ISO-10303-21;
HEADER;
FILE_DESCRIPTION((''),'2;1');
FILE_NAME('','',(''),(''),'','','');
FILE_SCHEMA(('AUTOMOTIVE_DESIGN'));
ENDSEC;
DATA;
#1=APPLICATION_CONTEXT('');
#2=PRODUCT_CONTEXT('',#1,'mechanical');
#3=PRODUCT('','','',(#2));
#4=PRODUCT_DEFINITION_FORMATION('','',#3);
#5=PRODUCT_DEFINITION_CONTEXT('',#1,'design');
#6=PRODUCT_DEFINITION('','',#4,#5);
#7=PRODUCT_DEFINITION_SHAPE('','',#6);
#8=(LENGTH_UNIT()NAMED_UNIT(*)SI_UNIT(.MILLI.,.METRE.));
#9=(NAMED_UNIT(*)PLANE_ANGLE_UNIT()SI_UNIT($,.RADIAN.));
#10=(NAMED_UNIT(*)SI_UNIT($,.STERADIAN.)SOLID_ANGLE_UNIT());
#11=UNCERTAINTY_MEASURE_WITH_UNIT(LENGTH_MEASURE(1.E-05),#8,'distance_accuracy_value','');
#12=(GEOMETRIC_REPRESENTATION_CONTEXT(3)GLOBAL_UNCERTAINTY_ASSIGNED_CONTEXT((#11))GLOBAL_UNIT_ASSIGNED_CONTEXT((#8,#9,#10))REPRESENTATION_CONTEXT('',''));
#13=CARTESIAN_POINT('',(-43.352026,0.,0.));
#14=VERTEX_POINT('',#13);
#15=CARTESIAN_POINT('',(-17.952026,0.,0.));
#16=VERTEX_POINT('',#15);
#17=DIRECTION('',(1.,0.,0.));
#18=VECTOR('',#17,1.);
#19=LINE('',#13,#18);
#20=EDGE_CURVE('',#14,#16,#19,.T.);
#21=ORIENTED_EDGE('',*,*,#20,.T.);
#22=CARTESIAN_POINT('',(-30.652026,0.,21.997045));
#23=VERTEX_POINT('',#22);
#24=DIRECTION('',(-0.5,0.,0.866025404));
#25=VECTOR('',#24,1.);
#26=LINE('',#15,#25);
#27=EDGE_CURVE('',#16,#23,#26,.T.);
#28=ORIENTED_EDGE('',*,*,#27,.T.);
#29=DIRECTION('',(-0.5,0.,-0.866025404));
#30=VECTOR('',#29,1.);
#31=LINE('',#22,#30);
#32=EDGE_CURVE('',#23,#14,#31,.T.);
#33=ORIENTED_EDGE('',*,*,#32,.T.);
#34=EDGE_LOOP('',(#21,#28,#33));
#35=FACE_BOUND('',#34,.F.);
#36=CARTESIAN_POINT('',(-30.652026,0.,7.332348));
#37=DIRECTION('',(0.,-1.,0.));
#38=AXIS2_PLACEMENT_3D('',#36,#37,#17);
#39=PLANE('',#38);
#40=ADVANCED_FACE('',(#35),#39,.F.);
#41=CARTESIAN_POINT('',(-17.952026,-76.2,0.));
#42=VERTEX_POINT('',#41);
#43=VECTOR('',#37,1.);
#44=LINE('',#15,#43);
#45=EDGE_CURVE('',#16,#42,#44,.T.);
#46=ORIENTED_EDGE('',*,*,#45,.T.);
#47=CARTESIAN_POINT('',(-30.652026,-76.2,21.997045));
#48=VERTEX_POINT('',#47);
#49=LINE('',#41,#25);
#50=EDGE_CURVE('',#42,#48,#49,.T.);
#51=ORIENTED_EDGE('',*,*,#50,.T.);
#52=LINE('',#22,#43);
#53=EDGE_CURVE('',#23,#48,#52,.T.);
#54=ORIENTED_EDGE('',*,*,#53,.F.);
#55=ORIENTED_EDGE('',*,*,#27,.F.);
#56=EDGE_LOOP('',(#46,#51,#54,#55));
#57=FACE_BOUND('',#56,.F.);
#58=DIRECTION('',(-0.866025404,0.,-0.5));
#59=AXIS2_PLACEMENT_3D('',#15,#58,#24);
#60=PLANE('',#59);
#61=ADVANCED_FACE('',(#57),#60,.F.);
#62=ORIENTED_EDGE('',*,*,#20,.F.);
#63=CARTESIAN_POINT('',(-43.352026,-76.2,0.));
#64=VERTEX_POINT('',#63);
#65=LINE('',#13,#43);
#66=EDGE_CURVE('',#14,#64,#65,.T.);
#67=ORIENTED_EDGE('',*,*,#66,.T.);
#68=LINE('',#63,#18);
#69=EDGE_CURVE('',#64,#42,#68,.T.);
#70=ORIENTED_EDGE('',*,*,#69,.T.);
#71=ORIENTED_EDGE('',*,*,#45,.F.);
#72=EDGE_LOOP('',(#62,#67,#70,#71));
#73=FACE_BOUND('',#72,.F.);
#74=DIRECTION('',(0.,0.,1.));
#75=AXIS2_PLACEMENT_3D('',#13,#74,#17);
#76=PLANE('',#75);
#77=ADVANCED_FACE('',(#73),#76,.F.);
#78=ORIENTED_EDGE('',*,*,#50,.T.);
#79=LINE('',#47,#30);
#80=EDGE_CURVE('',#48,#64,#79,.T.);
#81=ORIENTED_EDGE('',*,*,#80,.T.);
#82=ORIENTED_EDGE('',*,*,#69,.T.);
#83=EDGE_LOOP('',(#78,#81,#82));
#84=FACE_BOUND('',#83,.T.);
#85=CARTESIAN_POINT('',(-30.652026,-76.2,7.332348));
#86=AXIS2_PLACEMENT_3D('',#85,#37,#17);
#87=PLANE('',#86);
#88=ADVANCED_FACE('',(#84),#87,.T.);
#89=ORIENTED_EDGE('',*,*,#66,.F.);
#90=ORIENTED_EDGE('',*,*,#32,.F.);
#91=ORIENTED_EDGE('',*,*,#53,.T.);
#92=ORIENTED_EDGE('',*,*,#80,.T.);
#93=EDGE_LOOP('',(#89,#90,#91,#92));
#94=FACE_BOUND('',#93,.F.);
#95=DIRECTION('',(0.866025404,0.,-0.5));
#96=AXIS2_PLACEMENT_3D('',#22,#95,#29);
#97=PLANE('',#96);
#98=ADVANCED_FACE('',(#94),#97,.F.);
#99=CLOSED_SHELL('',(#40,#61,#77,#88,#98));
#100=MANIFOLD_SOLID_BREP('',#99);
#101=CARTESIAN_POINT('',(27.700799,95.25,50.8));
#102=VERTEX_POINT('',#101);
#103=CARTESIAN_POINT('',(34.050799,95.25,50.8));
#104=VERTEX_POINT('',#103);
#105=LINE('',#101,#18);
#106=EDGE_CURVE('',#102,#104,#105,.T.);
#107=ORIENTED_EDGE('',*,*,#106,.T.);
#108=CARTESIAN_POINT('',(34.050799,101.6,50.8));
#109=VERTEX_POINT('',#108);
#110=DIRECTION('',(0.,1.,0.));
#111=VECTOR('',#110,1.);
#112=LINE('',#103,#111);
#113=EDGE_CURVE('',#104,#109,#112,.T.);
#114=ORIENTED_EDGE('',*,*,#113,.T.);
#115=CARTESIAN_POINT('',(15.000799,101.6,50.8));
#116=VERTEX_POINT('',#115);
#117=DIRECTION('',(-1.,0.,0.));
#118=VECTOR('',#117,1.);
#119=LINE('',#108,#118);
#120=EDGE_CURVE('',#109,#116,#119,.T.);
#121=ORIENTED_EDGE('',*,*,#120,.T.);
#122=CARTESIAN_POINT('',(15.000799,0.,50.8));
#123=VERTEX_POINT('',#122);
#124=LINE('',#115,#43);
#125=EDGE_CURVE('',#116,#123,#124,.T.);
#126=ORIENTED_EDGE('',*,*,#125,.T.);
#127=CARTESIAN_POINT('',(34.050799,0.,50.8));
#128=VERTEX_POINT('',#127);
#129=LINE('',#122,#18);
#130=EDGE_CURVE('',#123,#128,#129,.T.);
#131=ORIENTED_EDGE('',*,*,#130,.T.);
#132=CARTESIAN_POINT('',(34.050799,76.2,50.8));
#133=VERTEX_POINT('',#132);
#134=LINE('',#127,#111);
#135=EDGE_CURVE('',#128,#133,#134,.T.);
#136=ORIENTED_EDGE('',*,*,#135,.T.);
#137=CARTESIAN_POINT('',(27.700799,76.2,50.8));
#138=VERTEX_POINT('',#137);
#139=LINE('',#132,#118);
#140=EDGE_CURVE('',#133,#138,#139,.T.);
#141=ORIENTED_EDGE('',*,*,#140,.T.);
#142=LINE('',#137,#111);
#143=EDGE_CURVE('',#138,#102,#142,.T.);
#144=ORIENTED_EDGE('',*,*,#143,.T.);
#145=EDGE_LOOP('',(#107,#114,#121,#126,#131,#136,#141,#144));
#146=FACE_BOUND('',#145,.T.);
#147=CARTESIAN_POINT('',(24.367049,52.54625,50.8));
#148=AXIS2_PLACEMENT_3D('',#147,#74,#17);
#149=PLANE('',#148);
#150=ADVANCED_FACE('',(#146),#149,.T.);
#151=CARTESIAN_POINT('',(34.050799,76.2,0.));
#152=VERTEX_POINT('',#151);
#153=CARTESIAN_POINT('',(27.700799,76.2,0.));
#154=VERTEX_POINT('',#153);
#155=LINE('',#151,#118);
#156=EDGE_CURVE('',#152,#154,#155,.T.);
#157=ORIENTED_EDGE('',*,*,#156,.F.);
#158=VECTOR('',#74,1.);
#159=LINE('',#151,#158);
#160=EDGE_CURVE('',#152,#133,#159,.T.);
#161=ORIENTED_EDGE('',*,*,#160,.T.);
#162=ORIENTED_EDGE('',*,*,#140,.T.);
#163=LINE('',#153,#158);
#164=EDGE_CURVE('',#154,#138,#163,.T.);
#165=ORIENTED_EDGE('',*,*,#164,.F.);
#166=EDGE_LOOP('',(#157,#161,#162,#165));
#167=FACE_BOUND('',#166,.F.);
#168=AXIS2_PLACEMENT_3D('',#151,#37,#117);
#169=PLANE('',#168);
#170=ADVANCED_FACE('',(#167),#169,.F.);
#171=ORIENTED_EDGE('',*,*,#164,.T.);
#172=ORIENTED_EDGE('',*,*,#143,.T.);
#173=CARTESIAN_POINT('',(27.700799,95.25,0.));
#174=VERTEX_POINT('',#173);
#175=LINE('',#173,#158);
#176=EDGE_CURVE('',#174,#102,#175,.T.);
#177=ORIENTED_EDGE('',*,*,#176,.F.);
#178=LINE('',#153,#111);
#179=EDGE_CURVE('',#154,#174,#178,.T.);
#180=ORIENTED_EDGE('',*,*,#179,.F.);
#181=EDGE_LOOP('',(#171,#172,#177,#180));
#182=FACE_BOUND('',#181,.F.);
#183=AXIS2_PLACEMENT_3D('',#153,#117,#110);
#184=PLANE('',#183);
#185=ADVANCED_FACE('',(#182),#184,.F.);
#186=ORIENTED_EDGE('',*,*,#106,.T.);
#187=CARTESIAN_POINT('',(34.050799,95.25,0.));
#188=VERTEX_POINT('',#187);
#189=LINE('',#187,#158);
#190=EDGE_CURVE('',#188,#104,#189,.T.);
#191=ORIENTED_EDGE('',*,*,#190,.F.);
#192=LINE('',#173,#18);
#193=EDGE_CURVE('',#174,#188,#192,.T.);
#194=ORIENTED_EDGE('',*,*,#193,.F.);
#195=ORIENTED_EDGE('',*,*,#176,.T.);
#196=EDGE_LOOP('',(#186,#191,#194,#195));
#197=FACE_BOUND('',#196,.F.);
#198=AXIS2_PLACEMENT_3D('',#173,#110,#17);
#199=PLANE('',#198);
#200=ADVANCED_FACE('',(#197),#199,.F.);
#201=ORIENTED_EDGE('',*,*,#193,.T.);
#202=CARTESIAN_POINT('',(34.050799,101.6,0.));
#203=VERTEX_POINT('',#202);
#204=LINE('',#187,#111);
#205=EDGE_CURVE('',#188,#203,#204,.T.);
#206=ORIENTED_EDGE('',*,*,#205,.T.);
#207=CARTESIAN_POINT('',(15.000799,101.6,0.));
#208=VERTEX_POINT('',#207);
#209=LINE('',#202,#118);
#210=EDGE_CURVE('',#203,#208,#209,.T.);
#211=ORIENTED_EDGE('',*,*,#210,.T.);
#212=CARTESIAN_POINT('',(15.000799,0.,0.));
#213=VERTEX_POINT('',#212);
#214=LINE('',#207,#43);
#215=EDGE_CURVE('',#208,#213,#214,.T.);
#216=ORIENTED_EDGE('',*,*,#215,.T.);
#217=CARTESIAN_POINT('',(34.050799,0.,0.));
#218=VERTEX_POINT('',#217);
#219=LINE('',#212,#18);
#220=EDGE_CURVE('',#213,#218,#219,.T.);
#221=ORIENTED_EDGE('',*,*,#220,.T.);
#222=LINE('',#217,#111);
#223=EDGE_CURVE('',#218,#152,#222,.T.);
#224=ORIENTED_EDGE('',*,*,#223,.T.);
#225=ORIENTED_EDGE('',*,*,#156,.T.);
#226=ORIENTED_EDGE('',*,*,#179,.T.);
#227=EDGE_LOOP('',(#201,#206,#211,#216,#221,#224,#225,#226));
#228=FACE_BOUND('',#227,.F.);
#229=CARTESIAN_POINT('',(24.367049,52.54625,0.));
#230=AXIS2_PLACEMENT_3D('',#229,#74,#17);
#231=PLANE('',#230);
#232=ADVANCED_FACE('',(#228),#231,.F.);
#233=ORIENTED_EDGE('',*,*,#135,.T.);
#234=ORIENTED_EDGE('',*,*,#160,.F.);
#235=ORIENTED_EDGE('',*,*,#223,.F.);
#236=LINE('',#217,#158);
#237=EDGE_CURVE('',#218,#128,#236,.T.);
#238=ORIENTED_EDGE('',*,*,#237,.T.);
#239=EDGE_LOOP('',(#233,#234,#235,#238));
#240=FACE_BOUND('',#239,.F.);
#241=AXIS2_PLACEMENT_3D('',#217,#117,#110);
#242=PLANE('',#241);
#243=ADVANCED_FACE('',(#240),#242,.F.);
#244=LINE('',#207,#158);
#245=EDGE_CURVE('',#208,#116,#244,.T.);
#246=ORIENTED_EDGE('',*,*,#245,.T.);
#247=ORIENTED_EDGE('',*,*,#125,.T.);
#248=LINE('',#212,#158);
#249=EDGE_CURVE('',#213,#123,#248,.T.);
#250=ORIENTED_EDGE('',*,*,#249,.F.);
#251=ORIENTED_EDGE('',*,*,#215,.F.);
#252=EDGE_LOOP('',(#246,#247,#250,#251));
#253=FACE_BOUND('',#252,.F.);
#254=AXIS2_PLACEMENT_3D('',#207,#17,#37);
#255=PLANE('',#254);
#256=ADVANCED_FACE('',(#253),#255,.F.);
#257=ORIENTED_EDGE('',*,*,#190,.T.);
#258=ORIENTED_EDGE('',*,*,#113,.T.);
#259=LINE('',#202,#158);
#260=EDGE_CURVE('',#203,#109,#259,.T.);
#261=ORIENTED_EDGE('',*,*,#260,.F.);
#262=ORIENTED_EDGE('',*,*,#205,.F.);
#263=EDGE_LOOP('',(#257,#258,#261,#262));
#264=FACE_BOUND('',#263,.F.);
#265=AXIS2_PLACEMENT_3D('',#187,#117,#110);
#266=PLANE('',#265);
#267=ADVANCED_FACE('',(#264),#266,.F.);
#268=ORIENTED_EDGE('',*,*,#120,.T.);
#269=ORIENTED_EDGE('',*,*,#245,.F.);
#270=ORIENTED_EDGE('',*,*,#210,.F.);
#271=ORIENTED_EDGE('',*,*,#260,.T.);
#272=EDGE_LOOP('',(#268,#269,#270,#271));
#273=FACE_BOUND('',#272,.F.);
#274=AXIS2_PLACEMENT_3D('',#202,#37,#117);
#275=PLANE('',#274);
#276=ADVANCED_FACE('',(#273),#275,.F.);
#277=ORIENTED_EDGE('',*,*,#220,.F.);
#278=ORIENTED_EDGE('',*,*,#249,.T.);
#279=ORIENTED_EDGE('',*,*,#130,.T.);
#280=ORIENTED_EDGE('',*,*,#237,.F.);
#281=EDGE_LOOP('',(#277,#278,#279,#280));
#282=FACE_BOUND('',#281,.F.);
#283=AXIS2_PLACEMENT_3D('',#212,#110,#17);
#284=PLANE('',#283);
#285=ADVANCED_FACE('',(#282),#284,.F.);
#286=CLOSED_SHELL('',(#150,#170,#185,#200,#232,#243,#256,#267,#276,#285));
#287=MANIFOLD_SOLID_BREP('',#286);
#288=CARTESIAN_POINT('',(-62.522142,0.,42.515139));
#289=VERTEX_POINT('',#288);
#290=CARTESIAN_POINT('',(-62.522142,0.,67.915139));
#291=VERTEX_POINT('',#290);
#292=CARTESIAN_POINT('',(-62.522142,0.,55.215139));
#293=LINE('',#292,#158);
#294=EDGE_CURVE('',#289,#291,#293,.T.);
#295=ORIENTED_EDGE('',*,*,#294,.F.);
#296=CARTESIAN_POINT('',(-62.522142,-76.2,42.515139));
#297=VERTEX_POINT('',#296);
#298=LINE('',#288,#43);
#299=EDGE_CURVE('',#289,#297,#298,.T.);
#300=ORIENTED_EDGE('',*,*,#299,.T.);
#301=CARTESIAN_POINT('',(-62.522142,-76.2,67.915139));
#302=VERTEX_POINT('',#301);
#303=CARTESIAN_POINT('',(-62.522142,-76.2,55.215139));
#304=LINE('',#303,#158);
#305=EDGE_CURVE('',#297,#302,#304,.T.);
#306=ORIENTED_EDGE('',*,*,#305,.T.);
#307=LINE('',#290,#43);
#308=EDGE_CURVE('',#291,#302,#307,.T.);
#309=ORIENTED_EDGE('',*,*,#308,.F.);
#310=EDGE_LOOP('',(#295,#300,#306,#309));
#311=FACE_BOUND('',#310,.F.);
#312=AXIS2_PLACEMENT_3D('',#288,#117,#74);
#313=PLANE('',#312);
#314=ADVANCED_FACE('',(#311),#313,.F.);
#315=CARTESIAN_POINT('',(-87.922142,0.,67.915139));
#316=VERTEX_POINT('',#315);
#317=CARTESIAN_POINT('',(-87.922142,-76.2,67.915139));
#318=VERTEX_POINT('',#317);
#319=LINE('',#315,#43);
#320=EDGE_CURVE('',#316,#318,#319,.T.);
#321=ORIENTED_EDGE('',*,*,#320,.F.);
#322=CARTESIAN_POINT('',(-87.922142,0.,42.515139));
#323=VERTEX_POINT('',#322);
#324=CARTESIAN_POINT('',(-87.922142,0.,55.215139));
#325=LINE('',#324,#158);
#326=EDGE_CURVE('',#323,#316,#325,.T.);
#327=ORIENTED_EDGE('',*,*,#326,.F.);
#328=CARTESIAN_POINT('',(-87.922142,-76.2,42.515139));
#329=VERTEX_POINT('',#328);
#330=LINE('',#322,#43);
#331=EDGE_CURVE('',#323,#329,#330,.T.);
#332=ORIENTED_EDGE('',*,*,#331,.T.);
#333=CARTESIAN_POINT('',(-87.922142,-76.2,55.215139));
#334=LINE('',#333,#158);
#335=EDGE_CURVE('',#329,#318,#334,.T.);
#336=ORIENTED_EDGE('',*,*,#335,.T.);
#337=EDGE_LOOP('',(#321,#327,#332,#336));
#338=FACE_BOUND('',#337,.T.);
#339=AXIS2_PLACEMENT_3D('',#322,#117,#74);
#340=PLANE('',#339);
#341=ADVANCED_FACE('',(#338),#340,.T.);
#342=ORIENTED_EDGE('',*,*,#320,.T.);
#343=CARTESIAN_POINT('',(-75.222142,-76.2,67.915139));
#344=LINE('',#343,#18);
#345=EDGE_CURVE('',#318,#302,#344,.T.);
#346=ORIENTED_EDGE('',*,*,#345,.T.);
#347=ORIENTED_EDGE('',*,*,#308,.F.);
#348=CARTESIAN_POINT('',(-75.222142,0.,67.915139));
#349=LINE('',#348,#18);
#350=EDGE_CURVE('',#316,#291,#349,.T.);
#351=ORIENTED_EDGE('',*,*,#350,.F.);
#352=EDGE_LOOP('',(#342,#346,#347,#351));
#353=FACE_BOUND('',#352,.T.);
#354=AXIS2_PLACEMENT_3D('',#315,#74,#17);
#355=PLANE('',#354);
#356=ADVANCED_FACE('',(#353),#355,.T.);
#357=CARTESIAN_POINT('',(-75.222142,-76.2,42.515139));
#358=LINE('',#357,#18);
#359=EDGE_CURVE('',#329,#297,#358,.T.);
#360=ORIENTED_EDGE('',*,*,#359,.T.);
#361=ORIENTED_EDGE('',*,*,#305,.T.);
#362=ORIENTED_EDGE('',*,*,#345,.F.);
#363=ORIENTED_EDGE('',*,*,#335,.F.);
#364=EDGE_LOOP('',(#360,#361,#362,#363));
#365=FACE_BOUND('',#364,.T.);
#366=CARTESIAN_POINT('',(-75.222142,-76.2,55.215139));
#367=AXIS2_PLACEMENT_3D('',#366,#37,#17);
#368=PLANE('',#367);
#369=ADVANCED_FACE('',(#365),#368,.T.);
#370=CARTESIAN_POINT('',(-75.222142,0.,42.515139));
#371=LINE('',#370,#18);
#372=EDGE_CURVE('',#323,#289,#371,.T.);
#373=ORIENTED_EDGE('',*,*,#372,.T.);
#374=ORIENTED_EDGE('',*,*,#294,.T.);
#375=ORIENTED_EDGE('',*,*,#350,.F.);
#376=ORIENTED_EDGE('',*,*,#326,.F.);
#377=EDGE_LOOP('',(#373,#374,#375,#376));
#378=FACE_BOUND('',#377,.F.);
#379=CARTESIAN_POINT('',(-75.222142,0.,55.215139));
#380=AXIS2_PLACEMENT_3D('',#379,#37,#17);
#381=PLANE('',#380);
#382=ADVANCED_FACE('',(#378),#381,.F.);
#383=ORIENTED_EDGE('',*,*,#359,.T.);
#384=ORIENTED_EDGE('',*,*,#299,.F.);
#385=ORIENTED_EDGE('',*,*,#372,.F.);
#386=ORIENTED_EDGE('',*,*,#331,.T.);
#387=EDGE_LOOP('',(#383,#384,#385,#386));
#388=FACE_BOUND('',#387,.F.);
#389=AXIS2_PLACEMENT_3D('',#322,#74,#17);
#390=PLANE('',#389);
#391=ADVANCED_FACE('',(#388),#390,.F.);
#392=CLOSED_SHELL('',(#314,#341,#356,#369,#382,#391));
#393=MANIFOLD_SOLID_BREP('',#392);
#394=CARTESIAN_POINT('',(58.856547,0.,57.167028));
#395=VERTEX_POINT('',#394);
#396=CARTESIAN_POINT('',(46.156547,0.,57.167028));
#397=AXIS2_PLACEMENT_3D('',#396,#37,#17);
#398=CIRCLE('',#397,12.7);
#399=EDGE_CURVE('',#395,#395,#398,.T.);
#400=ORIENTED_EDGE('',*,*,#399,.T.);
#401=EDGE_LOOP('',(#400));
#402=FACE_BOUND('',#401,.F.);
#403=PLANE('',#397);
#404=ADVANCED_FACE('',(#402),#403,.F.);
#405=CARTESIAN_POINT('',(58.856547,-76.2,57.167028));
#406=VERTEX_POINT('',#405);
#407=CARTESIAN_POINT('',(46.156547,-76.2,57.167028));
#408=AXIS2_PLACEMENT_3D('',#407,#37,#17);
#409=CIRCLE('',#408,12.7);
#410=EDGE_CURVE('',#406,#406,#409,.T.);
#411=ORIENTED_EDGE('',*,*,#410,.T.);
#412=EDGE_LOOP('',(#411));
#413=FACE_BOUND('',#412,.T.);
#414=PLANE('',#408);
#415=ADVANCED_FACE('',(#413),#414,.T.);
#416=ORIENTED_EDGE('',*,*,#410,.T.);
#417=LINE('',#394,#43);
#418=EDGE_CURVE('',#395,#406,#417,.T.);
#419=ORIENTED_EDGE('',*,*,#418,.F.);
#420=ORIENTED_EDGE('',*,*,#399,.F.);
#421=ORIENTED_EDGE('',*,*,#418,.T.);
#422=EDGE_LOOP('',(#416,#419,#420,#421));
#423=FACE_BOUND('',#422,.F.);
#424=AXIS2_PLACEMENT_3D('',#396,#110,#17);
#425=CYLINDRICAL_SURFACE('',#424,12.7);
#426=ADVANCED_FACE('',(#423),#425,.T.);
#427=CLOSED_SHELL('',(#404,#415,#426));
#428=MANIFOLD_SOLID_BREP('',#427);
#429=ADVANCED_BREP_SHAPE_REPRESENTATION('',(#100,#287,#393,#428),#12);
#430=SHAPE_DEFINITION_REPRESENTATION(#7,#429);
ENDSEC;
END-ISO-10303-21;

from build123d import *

# Parameters (mm, degrees)
F0_R     = 12.7
F1_DEPTH = 76.2
F0_W     = 25.4
F0_H     = 25.4
F3_DEPTH = 50.8


# Not quite as in the source:
# - a feature names something its author has since deleted; it is built from what else it names


with BuildPart() as f1:
    # F0 (on Front) → F1 (new body)
    with BuildSketch(Plane.XZ):
        with Locations((46.1565467664, 57.1670281734)):
            Circle(F0_R)
    extrude(amount=F1_DEPTH)


with BuildPart() as f1b:
    # F0 (on Front) → F1, piece 2 (new body)
    with BuildSketch(Plane.XZ):
        with Locations((-75.2221422301, 55.2151392767)):
            Rectangle(F0_W, F0_H)
    extrude(amount=F1_DEPTH)


with BuildPart() as f1c:
    # F0 (on Front) → F1, piece 3 (new body)
    with BuildSketch(Plane.XZ):
        Polygon((-43.352026199, 0), (-17.952026199, 0), (-30.652026199, 21.9970452561), align=None)
    extrude(amount=F1_DEPTH)


with BuildPart() as f3:
    # F2 (on Top) → F3 (new body)
    with BuildSketch(Plane.XY):
        Polygon((34.0507993009, 95.25), (34.0507993009, 101.6), (15.0007993009, 101.6), (15.0007993009, 0), (34.0507993009, 0), (34.0507993009, 76.2), (27.7007993009, 76.2), (27.7007993009, 95.25), align=None)
    extrude(amount=F3_DEPTH)


solid = Compound([f1.part, f1b.part, f1c.part, f3.part])
